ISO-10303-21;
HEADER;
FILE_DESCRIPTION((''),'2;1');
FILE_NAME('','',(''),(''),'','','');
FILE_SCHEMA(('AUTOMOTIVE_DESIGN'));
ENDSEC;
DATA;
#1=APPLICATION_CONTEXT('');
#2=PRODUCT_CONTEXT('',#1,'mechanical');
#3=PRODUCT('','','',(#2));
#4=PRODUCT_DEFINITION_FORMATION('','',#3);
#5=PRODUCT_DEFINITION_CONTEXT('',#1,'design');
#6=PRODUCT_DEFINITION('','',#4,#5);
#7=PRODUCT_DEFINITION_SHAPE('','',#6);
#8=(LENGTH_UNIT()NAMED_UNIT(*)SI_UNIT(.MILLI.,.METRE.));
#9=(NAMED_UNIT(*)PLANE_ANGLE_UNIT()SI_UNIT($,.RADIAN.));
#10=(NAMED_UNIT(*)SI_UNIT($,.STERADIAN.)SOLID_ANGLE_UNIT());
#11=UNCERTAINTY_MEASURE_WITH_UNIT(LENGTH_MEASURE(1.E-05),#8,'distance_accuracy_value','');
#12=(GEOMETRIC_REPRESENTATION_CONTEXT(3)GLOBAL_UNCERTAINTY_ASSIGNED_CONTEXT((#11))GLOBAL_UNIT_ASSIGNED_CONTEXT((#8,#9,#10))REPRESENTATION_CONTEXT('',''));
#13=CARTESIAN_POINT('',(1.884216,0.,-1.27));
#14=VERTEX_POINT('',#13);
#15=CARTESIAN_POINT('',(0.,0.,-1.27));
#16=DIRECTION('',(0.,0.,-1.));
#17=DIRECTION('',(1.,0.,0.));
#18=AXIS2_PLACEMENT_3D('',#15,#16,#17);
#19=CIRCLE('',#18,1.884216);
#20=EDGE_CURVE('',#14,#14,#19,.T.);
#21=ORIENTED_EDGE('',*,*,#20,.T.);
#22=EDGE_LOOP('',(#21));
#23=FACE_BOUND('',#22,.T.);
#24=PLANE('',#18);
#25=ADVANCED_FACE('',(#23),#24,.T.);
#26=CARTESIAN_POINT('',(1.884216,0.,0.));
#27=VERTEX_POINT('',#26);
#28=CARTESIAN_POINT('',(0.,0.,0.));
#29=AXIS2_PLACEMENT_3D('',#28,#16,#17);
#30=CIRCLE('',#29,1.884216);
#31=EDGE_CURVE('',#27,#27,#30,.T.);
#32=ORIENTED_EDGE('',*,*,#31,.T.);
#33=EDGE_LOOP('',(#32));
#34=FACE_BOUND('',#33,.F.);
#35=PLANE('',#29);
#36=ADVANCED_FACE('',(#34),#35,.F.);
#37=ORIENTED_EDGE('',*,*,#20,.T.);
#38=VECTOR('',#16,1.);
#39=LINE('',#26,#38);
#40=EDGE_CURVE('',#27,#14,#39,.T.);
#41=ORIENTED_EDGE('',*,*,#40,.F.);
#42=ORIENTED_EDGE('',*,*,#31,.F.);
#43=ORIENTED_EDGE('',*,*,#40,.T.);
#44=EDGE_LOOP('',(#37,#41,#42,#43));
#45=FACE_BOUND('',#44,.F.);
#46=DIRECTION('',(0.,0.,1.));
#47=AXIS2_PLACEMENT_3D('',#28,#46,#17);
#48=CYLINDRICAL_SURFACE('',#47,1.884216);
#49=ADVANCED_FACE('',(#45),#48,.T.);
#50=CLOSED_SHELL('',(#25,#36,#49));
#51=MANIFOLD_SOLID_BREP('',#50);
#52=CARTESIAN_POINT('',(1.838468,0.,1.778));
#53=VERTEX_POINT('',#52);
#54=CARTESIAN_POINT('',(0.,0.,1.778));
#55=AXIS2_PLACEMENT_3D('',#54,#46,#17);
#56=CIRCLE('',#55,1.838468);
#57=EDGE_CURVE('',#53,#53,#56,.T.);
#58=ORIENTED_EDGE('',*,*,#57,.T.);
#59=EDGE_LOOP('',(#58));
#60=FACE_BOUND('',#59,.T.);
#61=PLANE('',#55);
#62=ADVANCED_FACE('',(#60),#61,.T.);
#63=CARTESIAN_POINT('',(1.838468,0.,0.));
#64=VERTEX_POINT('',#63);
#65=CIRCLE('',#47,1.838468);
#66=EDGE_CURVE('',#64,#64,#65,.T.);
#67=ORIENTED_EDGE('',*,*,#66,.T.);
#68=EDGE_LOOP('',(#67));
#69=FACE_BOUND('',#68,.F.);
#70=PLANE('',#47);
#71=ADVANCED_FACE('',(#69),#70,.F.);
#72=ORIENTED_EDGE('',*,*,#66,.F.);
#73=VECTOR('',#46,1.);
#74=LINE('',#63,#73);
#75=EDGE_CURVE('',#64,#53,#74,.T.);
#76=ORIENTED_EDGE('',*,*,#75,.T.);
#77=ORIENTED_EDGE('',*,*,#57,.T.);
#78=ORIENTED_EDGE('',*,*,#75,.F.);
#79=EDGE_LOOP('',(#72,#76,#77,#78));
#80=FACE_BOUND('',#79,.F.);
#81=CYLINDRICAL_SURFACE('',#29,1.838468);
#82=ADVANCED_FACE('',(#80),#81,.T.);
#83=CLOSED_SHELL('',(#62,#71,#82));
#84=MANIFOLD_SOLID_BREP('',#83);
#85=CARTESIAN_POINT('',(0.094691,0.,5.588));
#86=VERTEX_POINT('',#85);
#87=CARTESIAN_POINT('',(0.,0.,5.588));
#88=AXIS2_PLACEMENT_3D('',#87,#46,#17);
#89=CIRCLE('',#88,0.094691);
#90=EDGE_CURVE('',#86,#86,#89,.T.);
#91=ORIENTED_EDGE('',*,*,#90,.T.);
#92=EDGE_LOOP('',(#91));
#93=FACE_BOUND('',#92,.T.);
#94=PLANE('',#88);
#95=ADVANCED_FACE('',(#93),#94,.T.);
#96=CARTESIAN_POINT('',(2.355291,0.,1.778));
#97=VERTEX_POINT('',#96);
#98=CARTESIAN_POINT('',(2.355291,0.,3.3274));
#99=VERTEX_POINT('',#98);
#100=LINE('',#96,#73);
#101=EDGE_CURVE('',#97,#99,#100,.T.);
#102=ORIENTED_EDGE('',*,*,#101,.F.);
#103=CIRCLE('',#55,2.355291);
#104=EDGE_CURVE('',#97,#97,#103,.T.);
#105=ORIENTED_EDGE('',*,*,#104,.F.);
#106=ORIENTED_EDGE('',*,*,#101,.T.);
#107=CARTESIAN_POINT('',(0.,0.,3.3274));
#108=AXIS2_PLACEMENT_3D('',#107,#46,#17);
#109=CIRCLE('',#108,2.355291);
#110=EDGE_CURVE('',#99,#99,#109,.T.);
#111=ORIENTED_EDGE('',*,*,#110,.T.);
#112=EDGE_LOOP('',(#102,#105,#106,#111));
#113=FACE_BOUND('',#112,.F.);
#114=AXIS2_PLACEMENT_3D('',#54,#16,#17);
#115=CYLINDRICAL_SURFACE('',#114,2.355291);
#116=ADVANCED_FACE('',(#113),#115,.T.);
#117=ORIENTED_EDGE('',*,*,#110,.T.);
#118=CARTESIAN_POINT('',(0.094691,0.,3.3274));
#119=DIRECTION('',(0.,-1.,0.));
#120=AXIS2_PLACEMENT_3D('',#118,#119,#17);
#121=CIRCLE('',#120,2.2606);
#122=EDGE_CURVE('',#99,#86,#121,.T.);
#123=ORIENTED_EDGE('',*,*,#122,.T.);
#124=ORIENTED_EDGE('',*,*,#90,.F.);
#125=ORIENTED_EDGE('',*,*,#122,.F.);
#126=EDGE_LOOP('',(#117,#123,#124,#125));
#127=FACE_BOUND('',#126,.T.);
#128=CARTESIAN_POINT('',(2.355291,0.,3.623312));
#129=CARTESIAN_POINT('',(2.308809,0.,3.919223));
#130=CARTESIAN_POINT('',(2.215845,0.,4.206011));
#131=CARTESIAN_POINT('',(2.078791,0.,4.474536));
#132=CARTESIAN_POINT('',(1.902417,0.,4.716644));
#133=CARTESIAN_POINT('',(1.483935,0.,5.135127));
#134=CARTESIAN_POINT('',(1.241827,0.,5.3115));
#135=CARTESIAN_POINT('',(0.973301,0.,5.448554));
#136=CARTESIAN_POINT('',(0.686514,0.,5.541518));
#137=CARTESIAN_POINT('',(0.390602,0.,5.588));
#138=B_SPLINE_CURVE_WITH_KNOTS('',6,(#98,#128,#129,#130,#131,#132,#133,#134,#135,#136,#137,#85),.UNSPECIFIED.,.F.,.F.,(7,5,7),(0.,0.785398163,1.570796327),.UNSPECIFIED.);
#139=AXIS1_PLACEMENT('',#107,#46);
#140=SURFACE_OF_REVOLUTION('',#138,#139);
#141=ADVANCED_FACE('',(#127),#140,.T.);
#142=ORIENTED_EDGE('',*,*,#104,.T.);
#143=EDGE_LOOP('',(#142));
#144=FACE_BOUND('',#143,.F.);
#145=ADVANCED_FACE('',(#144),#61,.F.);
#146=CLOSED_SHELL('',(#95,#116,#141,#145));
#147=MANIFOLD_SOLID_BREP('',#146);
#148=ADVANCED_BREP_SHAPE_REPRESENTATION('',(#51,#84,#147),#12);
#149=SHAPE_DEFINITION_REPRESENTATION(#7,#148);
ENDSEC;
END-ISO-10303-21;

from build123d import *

# Parameters (mm, degrees)
F0_R     = 1.8384679537
F1_DEPTH = 1.778
F2_R     = 2.3552905633
F2_R_2   = 1.8384679537
F3_DEPTH = 3.81
F4_R     = 2.2606
F5_R     = 1.884215831
F5_R_2   = 1.8384679537
F6_DEPTH = 1.27


with BuildPart() as f1:
    # F0 (on Top) → F1 (new body)
    with BuildSketch(Plane.XY):
        Circle(F0_R)
    extrude(amount=F1_DEPTH)


with BuildPart() as f3:
    # F2 (on face) → F3 (new body)
    with BuildSketch(Plane.XY.offset(1.778)):
        Circle(F2_R)
        Circle(F2_R_2, mode=Mode.SUBTRACT)
        Circle(F2_R_2)
    extrude(amount=F3_DEPTH)

    # F4
    f4_edges = [f3.edges().sort_by_distance(p)[0] for p in [
        (-2.355291, 0, 5.588),
    ]]
    fillet(f4_edges, radius=F4_R)


with BuildPart() as f6:
    # F5 (on face) → F6 (new body)
    with BuildSketch(Plane(origin=(0, 0, 0), x_dir=(1, 0, 0), z_dir=(0, 0, -1))):
        Circle(F5_R)
        Circle(F5_R_2, mode=Mode.SUBTRACT)
        Circle(F5_R_2)
    extrude(amount=F6_DEPTH)


solid = Compound([f1.part, f3.part, f6.part])
